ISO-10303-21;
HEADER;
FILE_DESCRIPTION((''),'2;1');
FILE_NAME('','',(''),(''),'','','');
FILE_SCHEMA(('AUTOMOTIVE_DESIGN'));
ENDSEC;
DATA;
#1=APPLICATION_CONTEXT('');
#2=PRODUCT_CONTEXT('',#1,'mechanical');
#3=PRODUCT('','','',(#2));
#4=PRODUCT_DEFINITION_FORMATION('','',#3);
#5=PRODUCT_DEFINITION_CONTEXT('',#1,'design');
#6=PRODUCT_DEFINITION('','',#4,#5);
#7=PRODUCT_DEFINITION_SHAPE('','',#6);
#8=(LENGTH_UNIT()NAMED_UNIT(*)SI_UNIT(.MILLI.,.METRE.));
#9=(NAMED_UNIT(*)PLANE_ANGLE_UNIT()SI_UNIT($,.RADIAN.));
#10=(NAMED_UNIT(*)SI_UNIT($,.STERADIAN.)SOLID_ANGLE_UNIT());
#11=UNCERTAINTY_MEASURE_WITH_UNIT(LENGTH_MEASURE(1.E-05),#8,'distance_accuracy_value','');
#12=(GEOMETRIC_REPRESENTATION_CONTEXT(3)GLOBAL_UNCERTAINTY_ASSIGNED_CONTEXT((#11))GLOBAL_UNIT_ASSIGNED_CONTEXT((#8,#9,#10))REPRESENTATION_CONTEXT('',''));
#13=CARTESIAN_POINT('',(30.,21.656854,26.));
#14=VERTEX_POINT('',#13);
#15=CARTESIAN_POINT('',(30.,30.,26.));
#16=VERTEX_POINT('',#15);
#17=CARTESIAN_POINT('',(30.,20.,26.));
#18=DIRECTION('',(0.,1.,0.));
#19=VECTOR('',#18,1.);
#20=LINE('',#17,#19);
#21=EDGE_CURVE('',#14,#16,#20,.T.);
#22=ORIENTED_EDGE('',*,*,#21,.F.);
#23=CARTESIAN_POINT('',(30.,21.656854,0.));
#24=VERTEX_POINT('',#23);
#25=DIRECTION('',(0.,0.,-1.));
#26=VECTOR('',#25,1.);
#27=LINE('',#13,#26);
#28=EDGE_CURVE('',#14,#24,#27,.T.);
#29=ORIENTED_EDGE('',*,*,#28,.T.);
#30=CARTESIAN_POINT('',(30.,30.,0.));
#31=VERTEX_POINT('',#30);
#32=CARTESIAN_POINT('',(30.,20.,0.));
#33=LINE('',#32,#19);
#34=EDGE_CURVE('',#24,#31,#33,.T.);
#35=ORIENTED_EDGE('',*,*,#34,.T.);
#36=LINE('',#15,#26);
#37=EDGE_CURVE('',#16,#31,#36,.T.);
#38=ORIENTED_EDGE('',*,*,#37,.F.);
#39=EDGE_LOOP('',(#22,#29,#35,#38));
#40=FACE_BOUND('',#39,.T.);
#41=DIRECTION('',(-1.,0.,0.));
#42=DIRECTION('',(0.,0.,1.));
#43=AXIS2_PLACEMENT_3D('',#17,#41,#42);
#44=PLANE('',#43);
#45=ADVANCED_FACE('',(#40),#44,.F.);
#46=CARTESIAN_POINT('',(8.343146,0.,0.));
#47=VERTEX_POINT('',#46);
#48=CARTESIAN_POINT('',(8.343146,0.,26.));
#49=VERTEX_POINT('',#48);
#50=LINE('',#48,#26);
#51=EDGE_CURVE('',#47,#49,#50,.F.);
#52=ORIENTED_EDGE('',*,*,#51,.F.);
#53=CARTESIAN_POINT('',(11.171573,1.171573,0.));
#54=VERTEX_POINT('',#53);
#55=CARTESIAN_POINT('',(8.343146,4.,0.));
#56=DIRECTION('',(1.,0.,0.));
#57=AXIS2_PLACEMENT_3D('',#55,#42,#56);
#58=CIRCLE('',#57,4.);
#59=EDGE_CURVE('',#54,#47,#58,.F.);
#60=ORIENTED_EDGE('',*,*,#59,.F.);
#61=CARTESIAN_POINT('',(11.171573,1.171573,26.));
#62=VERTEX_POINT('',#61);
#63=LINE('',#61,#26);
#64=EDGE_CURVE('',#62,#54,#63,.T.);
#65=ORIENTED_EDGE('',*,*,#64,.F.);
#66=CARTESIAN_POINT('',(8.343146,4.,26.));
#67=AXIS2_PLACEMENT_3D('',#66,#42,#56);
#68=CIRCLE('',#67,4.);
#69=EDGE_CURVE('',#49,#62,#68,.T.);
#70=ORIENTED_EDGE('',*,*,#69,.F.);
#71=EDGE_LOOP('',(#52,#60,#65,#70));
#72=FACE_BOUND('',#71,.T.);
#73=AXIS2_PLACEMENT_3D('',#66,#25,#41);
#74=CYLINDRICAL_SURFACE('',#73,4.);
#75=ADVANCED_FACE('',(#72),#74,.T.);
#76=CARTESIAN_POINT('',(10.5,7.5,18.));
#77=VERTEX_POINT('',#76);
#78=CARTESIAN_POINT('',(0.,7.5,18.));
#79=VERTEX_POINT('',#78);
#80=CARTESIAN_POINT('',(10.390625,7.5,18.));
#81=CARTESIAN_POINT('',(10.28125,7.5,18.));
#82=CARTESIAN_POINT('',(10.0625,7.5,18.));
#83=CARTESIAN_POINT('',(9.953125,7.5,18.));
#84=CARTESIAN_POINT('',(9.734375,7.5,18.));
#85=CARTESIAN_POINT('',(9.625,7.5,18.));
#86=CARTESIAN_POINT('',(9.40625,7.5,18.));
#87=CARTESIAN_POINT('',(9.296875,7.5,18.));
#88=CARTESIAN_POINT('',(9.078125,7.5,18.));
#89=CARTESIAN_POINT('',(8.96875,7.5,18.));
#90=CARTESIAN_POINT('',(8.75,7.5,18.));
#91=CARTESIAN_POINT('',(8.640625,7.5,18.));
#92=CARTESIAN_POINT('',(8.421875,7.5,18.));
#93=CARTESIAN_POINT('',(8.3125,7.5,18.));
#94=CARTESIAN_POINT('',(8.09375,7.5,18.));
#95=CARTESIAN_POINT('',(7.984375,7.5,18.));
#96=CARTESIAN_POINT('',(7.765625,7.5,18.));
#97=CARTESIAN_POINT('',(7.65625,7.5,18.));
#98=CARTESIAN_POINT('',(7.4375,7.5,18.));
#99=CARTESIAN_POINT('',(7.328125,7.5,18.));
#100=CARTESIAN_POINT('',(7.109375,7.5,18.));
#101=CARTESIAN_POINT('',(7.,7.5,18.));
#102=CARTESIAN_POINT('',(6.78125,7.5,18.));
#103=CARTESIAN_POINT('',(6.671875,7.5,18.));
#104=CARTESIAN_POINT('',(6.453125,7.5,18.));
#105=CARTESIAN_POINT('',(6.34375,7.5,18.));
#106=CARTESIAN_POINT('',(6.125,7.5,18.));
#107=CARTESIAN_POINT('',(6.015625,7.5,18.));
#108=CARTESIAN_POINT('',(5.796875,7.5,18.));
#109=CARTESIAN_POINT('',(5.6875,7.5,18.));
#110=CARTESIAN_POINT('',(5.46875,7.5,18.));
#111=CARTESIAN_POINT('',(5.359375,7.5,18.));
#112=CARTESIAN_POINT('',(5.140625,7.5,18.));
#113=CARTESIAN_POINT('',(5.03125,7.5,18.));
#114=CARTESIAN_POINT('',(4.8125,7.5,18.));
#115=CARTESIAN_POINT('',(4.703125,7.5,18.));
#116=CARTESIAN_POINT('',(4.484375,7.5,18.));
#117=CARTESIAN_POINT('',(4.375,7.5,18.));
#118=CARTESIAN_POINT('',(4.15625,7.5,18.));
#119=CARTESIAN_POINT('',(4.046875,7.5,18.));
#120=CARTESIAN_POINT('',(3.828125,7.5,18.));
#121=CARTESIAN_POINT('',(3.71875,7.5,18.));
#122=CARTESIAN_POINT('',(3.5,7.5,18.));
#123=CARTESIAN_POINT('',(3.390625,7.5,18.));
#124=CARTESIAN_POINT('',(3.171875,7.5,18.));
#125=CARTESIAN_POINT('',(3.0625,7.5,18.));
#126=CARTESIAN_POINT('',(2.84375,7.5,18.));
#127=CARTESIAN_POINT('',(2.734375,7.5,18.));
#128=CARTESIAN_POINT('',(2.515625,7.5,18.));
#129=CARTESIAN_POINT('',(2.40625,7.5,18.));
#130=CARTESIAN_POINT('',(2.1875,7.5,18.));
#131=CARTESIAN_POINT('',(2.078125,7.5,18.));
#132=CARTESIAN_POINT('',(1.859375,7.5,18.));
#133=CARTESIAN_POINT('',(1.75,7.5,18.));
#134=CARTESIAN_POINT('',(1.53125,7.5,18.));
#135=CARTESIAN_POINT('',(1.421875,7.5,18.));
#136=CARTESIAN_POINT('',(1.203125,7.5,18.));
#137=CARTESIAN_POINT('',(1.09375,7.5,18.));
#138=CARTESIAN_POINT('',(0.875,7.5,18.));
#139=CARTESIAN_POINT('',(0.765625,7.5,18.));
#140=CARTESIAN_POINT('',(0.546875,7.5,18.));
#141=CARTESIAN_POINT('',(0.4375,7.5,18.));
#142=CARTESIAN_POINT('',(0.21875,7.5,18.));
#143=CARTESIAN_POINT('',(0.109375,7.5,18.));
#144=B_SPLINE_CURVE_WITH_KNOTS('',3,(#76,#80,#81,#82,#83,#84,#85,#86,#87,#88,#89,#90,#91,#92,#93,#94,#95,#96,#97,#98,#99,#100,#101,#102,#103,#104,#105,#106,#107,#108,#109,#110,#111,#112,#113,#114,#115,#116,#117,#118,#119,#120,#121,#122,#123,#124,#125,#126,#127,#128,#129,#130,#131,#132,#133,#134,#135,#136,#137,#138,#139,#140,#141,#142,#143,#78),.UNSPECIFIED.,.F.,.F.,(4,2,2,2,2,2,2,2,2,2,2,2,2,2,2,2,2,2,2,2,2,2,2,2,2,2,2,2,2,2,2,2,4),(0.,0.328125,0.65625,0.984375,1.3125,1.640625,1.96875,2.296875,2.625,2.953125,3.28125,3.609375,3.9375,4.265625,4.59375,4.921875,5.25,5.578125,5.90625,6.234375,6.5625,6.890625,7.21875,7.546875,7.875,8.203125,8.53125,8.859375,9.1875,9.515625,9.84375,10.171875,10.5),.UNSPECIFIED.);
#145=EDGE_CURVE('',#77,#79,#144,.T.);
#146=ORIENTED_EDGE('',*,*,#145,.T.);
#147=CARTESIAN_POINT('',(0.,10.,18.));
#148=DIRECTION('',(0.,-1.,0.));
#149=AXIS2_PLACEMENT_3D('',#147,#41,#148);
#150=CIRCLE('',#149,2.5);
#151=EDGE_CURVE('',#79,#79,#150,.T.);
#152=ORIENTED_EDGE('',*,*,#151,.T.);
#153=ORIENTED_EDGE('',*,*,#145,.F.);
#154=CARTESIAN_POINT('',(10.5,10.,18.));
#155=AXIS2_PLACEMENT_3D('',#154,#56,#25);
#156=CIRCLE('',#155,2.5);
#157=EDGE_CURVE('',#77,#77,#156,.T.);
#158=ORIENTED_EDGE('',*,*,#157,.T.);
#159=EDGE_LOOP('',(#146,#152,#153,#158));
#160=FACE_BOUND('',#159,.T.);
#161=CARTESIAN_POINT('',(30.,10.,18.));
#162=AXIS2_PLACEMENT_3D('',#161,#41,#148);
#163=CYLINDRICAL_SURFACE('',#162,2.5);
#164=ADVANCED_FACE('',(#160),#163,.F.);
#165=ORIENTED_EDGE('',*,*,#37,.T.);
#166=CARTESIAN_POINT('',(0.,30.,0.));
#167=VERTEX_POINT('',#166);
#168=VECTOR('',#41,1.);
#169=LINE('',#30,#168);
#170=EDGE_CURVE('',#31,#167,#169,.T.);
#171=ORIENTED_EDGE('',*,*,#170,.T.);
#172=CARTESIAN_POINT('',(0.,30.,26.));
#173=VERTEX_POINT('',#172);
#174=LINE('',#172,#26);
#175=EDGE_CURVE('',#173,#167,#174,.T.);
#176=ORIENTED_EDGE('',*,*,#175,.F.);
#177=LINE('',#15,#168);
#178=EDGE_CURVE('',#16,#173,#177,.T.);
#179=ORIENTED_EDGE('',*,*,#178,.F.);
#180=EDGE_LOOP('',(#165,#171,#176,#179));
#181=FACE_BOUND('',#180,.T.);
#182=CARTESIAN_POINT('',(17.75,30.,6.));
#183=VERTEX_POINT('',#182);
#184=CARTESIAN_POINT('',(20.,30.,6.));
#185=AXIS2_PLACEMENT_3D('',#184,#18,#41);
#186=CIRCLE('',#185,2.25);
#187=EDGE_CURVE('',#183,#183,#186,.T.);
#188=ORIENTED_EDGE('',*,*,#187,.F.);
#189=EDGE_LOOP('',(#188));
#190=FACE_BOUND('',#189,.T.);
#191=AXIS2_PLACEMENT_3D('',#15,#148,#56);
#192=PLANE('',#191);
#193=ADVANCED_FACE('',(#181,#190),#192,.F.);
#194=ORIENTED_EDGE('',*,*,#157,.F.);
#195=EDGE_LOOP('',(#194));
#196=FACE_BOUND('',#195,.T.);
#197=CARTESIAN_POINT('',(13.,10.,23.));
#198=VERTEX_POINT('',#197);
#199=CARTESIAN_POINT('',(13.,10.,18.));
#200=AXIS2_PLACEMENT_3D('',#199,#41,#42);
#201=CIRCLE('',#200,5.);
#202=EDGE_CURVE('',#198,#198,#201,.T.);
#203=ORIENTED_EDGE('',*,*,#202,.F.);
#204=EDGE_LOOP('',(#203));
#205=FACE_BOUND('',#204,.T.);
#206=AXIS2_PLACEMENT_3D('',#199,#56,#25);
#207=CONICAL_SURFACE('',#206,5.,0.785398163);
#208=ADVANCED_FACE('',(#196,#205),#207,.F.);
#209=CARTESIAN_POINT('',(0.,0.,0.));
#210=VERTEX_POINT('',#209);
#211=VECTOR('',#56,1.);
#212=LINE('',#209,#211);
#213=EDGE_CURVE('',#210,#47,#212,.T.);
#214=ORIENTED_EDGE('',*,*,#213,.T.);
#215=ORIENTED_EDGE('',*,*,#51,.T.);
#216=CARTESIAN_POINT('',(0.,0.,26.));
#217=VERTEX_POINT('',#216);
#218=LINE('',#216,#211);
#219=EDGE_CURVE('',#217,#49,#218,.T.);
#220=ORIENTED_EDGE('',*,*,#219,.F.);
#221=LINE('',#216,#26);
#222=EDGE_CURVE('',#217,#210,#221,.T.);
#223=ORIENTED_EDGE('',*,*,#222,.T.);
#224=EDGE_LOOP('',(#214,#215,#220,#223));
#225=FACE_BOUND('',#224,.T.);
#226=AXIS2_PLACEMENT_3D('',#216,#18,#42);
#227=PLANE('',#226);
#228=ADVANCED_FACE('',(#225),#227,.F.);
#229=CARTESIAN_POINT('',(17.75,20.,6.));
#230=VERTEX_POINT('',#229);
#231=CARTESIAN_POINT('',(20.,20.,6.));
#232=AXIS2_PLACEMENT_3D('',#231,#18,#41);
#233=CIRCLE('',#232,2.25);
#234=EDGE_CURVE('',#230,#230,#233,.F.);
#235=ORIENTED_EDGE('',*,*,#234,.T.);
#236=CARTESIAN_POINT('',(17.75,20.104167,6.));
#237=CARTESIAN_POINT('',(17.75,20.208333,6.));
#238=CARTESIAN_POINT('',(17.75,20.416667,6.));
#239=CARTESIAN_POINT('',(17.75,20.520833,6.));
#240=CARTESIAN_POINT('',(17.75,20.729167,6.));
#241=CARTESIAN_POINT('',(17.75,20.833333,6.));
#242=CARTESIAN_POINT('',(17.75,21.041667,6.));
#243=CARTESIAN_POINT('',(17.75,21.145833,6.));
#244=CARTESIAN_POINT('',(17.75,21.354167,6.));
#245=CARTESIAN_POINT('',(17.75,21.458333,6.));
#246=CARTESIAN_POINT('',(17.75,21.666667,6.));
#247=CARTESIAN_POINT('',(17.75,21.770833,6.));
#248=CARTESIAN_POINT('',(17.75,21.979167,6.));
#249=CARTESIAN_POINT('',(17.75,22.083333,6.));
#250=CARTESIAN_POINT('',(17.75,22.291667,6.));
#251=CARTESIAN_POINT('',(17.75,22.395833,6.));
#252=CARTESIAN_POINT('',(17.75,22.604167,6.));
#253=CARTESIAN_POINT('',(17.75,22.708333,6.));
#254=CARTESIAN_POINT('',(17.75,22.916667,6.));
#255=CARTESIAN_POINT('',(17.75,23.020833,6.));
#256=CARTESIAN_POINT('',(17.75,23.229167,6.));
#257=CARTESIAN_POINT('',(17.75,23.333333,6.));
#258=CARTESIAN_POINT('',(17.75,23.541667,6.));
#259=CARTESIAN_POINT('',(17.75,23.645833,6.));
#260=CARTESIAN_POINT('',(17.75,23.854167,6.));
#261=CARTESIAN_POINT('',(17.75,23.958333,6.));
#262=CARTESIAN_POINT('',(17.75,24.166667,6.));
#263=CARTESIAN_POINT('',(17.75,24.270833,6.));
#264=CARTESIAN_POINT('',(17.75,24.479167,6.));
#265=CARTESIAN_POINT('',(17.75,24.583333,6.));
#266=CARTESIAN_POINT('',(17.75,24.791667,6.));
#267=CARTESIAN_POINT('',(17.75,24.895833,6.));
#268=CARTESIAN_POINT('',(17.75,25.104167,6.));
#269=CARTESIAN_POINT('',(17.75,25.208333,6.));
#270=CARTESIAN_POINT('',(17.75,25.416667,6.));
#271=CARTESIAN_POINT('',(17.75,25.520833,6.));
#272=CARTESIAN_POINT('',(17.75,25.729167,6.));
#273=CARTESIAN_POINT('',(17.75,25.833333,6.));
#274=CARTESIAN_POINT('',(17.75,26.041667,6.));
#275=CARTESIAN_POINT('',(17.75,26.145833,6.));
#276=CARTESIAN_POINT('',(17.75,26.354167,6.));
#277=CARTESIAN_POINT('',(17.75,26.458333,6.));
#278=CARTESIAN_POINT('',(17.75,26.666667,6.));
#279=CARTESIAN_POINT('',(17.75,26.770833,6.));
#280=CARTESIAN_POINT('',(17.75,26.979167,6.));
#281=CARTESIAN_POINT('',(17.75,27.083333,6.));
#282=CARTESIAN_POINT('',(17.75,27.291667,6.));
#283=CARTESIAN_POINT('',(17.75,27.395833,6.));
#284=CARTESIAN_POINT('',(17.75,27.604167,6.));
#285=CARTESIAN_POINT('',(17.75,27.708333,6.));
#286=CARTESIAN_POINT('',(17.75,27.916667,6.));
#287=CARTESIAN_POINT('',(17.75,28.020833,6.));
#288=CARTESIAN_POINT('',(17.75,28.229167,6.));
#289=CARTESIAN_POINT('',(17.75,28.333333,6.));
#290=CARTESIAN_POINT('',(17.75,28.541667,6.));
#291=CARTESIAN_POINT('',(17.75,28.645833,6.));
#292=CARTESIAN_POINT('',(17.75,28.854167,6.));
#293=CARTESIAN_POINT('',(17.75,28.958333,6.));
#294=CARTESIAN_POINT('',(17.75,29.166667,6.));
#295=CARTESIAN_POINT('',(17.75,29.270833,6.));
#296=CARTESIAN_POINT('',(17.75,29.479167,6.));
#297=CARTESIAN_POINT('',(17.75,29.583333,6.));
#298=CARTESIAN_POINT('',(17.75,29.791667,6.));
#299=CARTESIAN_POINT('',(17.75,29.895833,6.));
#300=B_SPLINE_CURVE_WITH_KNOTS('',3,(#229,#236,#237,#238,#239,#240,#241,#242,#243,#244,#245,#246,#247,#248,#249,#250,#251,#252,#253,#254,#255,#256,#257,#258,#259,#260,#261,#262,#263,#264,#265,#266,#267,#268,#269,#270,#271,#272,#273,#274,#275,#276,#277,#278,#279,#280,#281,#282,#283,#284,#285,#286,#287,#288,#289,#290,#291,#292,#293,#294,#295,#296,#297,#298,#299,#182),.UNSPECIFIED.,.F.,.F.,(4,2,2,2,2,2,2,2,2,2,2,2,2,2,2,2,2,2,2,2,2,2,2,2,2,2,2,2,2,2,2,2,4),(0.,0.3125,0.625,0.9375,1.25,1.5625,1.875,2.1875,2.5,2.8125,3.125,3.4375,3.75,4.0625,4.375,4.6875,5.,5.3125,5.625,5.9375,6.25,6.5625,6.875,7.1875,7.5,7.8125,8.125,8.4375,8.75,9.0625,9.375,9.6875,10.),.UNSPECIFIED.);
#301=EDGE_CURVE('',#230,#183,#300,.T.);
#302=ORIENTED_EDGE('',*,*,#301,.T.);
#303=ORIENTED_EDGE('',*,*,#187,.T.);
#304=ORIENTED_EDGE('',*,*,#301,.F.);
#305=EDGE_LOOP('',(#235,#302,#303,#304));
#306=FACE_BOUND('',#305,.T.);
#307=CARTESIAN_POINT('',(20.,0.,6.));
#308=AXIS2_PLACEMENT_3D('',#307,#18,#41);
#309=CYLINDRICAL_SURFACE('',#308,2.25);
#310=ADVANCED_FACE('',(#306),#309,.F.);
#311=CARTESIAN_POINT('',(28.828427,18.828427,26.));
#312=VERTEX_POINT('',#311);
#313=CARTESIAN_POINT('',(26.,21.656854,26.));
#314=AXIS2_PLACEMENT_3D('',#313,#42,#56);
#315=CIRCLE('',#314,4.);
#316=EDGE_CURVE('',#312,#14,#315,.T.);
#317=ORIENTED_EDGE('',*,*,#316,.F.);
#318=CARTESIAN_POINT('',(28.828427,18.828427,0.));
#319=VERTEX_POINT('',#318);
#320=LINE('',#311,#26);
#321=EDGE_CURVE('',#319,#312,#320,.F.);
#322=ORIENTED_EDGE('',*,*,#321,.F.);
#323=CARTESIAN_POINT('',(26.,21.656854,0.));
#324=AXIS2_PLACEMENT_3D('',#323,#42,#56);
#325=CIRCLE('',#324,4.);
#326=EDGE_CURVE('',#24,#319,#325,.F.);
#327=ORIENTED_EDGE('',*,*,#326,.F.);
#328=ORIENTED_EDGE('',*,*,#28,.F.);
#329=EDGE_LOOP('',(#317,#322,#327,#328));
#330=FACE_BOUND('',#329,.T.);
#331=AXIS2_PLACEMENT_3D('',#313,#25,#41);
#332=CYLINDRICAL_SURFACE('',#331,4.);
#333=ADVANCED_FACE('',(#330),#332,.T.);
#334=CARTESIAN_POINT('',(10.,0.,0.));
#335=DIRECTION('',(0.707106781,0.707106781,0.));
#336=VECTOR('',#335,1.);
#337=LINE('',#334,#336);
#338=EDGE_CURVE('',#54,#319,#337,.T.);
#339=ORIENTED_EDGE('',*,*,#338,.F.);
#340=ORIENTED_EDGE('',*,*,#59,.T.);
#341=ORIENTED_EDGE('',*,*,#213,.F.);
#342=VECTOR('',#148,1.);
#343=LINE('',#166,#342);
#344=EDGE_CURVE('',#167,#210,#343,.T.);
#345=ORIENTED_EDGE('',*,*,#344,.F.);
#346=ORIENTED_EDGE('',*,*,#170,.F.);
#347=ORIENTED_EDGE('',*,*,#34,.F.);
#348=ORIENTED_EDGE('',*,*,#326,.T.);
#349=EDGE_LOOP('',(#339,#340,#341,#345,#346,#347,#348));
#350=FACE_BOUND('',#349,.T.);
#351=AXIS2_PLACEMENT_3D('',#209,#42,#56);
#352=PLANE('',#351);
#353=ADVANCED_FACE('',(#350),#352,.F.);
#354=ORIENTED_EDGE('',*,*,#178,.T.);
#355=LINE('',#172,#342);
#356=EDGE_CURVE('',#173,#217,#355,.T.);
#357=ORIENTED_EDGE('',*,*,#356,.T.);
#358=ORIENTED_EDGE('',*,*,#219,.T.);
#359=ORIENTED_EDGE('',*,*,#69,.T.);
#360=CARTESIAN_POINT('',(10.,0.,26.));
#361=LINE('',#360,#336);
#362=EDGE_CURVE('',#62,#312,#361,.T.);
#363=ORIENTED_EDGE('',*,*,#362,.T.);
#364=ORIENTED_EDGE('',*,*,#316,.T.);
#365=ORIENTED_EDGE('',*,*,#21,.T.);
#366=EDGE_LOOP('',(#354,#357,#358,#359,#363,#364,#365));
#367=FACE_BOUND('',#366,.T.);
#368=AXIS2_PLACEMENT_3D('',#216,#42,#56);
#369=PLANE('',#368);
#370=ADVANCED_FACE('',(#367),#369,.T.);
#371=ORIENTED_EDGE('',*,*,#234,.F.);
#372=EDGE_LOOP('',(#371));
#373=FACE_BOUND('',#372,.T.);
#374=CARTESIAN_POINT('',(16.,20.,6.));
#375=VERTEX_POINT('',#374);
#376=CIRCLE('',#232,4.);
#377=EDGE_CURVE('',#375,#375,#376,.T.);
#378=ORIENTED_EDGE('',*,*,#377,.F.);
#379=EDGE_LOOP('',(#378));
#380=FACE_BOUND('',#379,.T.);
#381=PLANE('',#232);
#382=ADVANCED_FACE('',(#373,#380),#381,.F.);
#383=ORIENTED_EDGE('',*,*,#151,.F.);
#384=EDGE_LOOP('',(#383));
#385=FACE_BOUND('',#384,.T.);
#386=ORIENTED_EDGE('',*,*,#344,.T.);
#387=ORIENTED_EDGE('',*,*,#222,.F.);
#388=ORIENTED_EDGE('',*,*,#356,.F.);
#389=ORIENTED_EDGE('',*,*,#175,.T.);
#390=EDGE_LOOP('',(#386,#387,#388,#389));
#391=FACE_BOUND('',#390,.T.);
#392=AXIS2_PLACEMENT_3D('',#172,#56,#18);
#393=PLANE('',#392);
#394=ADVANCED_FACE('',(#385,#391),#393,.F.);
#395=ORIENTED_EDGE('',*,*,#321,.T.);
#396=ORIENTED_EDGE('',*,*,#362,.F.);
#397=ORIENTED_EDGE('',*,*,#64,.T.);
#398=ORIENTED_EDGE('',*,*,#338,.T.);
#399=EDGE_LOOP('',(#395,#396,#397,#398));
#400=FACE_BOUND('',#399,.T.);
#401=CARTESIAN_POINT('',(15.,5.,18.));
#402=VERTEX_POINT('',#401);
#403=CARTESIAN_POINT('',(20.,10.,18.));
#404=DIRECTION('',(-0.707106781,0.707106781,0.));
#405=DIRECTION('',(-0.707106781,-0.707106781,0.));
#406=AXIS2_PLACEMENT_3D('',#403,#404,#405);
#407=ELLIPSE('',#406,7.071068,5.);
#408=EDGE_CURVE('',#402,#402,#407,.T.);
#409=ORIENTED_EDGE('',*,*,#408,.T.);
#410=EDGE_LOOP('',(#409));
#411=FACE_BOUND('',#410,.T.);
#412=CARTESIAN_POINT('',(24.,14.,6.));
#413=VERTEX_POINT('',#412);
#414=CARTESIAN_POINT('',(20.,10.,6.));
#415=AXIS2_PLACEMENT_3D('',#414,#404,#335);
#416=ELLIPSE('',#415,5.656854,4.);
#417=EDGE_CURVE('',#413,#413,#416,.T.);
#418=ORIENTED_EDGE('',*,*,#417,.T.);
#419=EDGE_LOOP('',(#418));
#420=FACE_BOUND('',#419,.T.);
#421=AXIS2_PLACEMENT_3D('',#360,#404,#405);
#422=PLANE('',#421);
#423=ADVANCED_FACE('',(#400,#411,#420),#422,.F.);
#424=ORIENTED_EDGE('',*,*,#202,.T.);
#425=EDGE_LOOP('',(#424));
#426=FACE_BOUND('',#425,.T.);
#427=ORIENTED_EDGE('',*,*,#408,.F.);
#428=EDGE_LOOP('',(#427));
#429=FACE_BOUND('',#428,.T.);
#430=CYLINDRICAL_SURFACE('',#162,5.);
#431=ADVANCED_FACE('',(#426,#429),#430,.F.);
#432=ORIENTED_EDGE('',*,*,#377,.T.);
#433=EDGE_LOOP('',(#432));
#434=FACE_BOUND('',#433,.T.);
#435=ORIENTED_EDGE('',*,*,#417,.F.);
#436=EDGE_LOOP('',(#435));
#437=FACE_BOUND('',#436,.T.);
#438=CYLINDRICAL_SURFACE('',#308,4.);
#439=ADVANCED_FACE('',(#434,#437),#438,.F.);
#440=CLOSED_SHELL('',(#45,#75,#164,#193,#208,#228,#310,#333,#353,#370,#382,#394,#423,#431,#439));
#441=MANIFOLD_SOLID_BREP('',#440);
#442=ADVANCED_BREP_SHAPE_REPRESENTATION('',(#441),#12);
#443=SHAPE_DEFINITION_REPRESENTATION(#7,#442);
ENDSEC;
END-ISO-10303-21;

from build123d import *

# Parameters (mm, degrees)
BOSS_EXTRUDE1_DEPTH = 26
SKETCH3_R           = 2.25
CUT_EXTRUDE1_DEPTH  = 50.759421218
SKETCH2_R           = 2.5
CUT_EXTRUDE2_DEPTH  = 50.759421218
SKETCH4_R           = 5
CUT_EXTRUDE3_DEPTH  = 45.452221542
SKETCH5_R           = 4
CUT_EXTRUDE4_DEPTH  = 45.452221542
CHAMFER1_SIZE       = 3
FILLET2_R           = 4


with BuildPart() as part:
    # Sketch1 → Boss-Extrude1 (new body)
    with BuildSketch(Plane.XY):
        Polygon((0, 0), (10, 0), (30, 20), (30, 30), (0, 30), align=None)
    extrude(amount=BOSS_EXTRUDE1_DEPTH)

    # Sketch3 → Cut-Extrude1 (cut, through all)
    with BuildSketch(Plane(origin=(0, 30, 0), x_dir=(1, 0, 0), z_dir=(0, 1, 0))):
        with Locations(Location((20, -6, 0), (0, 0, 180))):
            Circle(SKETCH3_R)
    extrude(amount=-CUT_EXTRUDE1_DEPTH, mode=Mode.SUBTRACT)

    # Sketch2 → Cut-Extrude2 (cut, through all)
    with BuildSketch(Plane.ZY):
        with Locations(Location((18, 10, 0), (0, 0, 270))):
            Circle(SKETCH2_R)
    extrude(amount=-CUT_EXTRUDE2_DEPTH, mode=Mode.SUBTRACT)

    # Sketch4 → Cut-Extrude3 (cut, through all)
    with BuildSketch(Plane.ZY.offset(-10)):
        with Locations(Location((18, 10, 0), (0, 0, 270))):
            Circle(SKETCH4_R)
    extrude(amount=-CUT_EXTRUDE3_DEPTH, mode=Mode.SUBTRACT)

    # Sketch5 → Cut-Extrude4 (cut, through all)
    with BuildSketch(Plane(origin=(0, 20, 0), x_dir=(1, 0, 0), z_dir=(0, 1, 0))):
        with Locations(Location((20, -6, 0), (0, 0, 180))):
            Circle(SKETCH5_R)
    extrude(amount=-CUT_EXTRUDE4_DEPTH, mode=Mode.SUBTRACT)

    # Chamfer1
    # the kernel refuses this chamfer: 3 mm, written as the material it adds along each edge
    with BuildSketch(Plane(origin=(10, 10, 18), x_dir=(0, -1, 0), z_dir=(0, 0, -1))) as chamfer1_piece_1_section:
        Polygon((5, -CHAMFER1_SIZE), (5 - CHAMFER1_SIZE, 0), (5, 0), align=None)
    chamfer1_piece_1 = revolve(axis=Axis((10, 10, 18), (-1, 0, 0)), mode=Mode.PRIVATE)
    chamfer1_piece_1 = chamfer1_piece_1 - Plane(origin=(11.757355127, 10, 18), x_dir=(0, -1, 0), z_dir=(-1, 0, 0)) * Cylinder(2.5, 20, mode=Mode.PRIVATE)
    add(chamfer1_piece_1)

    # Fillet2
    fillet2_edges = [part.edges().sort_by_distance(p)[0] for p in [
        (30, 20, 13),
        (10, 0, 13),
    ]]
    fillet(fillet2_edges, radius=FILLET2_R)


solid = part.part
